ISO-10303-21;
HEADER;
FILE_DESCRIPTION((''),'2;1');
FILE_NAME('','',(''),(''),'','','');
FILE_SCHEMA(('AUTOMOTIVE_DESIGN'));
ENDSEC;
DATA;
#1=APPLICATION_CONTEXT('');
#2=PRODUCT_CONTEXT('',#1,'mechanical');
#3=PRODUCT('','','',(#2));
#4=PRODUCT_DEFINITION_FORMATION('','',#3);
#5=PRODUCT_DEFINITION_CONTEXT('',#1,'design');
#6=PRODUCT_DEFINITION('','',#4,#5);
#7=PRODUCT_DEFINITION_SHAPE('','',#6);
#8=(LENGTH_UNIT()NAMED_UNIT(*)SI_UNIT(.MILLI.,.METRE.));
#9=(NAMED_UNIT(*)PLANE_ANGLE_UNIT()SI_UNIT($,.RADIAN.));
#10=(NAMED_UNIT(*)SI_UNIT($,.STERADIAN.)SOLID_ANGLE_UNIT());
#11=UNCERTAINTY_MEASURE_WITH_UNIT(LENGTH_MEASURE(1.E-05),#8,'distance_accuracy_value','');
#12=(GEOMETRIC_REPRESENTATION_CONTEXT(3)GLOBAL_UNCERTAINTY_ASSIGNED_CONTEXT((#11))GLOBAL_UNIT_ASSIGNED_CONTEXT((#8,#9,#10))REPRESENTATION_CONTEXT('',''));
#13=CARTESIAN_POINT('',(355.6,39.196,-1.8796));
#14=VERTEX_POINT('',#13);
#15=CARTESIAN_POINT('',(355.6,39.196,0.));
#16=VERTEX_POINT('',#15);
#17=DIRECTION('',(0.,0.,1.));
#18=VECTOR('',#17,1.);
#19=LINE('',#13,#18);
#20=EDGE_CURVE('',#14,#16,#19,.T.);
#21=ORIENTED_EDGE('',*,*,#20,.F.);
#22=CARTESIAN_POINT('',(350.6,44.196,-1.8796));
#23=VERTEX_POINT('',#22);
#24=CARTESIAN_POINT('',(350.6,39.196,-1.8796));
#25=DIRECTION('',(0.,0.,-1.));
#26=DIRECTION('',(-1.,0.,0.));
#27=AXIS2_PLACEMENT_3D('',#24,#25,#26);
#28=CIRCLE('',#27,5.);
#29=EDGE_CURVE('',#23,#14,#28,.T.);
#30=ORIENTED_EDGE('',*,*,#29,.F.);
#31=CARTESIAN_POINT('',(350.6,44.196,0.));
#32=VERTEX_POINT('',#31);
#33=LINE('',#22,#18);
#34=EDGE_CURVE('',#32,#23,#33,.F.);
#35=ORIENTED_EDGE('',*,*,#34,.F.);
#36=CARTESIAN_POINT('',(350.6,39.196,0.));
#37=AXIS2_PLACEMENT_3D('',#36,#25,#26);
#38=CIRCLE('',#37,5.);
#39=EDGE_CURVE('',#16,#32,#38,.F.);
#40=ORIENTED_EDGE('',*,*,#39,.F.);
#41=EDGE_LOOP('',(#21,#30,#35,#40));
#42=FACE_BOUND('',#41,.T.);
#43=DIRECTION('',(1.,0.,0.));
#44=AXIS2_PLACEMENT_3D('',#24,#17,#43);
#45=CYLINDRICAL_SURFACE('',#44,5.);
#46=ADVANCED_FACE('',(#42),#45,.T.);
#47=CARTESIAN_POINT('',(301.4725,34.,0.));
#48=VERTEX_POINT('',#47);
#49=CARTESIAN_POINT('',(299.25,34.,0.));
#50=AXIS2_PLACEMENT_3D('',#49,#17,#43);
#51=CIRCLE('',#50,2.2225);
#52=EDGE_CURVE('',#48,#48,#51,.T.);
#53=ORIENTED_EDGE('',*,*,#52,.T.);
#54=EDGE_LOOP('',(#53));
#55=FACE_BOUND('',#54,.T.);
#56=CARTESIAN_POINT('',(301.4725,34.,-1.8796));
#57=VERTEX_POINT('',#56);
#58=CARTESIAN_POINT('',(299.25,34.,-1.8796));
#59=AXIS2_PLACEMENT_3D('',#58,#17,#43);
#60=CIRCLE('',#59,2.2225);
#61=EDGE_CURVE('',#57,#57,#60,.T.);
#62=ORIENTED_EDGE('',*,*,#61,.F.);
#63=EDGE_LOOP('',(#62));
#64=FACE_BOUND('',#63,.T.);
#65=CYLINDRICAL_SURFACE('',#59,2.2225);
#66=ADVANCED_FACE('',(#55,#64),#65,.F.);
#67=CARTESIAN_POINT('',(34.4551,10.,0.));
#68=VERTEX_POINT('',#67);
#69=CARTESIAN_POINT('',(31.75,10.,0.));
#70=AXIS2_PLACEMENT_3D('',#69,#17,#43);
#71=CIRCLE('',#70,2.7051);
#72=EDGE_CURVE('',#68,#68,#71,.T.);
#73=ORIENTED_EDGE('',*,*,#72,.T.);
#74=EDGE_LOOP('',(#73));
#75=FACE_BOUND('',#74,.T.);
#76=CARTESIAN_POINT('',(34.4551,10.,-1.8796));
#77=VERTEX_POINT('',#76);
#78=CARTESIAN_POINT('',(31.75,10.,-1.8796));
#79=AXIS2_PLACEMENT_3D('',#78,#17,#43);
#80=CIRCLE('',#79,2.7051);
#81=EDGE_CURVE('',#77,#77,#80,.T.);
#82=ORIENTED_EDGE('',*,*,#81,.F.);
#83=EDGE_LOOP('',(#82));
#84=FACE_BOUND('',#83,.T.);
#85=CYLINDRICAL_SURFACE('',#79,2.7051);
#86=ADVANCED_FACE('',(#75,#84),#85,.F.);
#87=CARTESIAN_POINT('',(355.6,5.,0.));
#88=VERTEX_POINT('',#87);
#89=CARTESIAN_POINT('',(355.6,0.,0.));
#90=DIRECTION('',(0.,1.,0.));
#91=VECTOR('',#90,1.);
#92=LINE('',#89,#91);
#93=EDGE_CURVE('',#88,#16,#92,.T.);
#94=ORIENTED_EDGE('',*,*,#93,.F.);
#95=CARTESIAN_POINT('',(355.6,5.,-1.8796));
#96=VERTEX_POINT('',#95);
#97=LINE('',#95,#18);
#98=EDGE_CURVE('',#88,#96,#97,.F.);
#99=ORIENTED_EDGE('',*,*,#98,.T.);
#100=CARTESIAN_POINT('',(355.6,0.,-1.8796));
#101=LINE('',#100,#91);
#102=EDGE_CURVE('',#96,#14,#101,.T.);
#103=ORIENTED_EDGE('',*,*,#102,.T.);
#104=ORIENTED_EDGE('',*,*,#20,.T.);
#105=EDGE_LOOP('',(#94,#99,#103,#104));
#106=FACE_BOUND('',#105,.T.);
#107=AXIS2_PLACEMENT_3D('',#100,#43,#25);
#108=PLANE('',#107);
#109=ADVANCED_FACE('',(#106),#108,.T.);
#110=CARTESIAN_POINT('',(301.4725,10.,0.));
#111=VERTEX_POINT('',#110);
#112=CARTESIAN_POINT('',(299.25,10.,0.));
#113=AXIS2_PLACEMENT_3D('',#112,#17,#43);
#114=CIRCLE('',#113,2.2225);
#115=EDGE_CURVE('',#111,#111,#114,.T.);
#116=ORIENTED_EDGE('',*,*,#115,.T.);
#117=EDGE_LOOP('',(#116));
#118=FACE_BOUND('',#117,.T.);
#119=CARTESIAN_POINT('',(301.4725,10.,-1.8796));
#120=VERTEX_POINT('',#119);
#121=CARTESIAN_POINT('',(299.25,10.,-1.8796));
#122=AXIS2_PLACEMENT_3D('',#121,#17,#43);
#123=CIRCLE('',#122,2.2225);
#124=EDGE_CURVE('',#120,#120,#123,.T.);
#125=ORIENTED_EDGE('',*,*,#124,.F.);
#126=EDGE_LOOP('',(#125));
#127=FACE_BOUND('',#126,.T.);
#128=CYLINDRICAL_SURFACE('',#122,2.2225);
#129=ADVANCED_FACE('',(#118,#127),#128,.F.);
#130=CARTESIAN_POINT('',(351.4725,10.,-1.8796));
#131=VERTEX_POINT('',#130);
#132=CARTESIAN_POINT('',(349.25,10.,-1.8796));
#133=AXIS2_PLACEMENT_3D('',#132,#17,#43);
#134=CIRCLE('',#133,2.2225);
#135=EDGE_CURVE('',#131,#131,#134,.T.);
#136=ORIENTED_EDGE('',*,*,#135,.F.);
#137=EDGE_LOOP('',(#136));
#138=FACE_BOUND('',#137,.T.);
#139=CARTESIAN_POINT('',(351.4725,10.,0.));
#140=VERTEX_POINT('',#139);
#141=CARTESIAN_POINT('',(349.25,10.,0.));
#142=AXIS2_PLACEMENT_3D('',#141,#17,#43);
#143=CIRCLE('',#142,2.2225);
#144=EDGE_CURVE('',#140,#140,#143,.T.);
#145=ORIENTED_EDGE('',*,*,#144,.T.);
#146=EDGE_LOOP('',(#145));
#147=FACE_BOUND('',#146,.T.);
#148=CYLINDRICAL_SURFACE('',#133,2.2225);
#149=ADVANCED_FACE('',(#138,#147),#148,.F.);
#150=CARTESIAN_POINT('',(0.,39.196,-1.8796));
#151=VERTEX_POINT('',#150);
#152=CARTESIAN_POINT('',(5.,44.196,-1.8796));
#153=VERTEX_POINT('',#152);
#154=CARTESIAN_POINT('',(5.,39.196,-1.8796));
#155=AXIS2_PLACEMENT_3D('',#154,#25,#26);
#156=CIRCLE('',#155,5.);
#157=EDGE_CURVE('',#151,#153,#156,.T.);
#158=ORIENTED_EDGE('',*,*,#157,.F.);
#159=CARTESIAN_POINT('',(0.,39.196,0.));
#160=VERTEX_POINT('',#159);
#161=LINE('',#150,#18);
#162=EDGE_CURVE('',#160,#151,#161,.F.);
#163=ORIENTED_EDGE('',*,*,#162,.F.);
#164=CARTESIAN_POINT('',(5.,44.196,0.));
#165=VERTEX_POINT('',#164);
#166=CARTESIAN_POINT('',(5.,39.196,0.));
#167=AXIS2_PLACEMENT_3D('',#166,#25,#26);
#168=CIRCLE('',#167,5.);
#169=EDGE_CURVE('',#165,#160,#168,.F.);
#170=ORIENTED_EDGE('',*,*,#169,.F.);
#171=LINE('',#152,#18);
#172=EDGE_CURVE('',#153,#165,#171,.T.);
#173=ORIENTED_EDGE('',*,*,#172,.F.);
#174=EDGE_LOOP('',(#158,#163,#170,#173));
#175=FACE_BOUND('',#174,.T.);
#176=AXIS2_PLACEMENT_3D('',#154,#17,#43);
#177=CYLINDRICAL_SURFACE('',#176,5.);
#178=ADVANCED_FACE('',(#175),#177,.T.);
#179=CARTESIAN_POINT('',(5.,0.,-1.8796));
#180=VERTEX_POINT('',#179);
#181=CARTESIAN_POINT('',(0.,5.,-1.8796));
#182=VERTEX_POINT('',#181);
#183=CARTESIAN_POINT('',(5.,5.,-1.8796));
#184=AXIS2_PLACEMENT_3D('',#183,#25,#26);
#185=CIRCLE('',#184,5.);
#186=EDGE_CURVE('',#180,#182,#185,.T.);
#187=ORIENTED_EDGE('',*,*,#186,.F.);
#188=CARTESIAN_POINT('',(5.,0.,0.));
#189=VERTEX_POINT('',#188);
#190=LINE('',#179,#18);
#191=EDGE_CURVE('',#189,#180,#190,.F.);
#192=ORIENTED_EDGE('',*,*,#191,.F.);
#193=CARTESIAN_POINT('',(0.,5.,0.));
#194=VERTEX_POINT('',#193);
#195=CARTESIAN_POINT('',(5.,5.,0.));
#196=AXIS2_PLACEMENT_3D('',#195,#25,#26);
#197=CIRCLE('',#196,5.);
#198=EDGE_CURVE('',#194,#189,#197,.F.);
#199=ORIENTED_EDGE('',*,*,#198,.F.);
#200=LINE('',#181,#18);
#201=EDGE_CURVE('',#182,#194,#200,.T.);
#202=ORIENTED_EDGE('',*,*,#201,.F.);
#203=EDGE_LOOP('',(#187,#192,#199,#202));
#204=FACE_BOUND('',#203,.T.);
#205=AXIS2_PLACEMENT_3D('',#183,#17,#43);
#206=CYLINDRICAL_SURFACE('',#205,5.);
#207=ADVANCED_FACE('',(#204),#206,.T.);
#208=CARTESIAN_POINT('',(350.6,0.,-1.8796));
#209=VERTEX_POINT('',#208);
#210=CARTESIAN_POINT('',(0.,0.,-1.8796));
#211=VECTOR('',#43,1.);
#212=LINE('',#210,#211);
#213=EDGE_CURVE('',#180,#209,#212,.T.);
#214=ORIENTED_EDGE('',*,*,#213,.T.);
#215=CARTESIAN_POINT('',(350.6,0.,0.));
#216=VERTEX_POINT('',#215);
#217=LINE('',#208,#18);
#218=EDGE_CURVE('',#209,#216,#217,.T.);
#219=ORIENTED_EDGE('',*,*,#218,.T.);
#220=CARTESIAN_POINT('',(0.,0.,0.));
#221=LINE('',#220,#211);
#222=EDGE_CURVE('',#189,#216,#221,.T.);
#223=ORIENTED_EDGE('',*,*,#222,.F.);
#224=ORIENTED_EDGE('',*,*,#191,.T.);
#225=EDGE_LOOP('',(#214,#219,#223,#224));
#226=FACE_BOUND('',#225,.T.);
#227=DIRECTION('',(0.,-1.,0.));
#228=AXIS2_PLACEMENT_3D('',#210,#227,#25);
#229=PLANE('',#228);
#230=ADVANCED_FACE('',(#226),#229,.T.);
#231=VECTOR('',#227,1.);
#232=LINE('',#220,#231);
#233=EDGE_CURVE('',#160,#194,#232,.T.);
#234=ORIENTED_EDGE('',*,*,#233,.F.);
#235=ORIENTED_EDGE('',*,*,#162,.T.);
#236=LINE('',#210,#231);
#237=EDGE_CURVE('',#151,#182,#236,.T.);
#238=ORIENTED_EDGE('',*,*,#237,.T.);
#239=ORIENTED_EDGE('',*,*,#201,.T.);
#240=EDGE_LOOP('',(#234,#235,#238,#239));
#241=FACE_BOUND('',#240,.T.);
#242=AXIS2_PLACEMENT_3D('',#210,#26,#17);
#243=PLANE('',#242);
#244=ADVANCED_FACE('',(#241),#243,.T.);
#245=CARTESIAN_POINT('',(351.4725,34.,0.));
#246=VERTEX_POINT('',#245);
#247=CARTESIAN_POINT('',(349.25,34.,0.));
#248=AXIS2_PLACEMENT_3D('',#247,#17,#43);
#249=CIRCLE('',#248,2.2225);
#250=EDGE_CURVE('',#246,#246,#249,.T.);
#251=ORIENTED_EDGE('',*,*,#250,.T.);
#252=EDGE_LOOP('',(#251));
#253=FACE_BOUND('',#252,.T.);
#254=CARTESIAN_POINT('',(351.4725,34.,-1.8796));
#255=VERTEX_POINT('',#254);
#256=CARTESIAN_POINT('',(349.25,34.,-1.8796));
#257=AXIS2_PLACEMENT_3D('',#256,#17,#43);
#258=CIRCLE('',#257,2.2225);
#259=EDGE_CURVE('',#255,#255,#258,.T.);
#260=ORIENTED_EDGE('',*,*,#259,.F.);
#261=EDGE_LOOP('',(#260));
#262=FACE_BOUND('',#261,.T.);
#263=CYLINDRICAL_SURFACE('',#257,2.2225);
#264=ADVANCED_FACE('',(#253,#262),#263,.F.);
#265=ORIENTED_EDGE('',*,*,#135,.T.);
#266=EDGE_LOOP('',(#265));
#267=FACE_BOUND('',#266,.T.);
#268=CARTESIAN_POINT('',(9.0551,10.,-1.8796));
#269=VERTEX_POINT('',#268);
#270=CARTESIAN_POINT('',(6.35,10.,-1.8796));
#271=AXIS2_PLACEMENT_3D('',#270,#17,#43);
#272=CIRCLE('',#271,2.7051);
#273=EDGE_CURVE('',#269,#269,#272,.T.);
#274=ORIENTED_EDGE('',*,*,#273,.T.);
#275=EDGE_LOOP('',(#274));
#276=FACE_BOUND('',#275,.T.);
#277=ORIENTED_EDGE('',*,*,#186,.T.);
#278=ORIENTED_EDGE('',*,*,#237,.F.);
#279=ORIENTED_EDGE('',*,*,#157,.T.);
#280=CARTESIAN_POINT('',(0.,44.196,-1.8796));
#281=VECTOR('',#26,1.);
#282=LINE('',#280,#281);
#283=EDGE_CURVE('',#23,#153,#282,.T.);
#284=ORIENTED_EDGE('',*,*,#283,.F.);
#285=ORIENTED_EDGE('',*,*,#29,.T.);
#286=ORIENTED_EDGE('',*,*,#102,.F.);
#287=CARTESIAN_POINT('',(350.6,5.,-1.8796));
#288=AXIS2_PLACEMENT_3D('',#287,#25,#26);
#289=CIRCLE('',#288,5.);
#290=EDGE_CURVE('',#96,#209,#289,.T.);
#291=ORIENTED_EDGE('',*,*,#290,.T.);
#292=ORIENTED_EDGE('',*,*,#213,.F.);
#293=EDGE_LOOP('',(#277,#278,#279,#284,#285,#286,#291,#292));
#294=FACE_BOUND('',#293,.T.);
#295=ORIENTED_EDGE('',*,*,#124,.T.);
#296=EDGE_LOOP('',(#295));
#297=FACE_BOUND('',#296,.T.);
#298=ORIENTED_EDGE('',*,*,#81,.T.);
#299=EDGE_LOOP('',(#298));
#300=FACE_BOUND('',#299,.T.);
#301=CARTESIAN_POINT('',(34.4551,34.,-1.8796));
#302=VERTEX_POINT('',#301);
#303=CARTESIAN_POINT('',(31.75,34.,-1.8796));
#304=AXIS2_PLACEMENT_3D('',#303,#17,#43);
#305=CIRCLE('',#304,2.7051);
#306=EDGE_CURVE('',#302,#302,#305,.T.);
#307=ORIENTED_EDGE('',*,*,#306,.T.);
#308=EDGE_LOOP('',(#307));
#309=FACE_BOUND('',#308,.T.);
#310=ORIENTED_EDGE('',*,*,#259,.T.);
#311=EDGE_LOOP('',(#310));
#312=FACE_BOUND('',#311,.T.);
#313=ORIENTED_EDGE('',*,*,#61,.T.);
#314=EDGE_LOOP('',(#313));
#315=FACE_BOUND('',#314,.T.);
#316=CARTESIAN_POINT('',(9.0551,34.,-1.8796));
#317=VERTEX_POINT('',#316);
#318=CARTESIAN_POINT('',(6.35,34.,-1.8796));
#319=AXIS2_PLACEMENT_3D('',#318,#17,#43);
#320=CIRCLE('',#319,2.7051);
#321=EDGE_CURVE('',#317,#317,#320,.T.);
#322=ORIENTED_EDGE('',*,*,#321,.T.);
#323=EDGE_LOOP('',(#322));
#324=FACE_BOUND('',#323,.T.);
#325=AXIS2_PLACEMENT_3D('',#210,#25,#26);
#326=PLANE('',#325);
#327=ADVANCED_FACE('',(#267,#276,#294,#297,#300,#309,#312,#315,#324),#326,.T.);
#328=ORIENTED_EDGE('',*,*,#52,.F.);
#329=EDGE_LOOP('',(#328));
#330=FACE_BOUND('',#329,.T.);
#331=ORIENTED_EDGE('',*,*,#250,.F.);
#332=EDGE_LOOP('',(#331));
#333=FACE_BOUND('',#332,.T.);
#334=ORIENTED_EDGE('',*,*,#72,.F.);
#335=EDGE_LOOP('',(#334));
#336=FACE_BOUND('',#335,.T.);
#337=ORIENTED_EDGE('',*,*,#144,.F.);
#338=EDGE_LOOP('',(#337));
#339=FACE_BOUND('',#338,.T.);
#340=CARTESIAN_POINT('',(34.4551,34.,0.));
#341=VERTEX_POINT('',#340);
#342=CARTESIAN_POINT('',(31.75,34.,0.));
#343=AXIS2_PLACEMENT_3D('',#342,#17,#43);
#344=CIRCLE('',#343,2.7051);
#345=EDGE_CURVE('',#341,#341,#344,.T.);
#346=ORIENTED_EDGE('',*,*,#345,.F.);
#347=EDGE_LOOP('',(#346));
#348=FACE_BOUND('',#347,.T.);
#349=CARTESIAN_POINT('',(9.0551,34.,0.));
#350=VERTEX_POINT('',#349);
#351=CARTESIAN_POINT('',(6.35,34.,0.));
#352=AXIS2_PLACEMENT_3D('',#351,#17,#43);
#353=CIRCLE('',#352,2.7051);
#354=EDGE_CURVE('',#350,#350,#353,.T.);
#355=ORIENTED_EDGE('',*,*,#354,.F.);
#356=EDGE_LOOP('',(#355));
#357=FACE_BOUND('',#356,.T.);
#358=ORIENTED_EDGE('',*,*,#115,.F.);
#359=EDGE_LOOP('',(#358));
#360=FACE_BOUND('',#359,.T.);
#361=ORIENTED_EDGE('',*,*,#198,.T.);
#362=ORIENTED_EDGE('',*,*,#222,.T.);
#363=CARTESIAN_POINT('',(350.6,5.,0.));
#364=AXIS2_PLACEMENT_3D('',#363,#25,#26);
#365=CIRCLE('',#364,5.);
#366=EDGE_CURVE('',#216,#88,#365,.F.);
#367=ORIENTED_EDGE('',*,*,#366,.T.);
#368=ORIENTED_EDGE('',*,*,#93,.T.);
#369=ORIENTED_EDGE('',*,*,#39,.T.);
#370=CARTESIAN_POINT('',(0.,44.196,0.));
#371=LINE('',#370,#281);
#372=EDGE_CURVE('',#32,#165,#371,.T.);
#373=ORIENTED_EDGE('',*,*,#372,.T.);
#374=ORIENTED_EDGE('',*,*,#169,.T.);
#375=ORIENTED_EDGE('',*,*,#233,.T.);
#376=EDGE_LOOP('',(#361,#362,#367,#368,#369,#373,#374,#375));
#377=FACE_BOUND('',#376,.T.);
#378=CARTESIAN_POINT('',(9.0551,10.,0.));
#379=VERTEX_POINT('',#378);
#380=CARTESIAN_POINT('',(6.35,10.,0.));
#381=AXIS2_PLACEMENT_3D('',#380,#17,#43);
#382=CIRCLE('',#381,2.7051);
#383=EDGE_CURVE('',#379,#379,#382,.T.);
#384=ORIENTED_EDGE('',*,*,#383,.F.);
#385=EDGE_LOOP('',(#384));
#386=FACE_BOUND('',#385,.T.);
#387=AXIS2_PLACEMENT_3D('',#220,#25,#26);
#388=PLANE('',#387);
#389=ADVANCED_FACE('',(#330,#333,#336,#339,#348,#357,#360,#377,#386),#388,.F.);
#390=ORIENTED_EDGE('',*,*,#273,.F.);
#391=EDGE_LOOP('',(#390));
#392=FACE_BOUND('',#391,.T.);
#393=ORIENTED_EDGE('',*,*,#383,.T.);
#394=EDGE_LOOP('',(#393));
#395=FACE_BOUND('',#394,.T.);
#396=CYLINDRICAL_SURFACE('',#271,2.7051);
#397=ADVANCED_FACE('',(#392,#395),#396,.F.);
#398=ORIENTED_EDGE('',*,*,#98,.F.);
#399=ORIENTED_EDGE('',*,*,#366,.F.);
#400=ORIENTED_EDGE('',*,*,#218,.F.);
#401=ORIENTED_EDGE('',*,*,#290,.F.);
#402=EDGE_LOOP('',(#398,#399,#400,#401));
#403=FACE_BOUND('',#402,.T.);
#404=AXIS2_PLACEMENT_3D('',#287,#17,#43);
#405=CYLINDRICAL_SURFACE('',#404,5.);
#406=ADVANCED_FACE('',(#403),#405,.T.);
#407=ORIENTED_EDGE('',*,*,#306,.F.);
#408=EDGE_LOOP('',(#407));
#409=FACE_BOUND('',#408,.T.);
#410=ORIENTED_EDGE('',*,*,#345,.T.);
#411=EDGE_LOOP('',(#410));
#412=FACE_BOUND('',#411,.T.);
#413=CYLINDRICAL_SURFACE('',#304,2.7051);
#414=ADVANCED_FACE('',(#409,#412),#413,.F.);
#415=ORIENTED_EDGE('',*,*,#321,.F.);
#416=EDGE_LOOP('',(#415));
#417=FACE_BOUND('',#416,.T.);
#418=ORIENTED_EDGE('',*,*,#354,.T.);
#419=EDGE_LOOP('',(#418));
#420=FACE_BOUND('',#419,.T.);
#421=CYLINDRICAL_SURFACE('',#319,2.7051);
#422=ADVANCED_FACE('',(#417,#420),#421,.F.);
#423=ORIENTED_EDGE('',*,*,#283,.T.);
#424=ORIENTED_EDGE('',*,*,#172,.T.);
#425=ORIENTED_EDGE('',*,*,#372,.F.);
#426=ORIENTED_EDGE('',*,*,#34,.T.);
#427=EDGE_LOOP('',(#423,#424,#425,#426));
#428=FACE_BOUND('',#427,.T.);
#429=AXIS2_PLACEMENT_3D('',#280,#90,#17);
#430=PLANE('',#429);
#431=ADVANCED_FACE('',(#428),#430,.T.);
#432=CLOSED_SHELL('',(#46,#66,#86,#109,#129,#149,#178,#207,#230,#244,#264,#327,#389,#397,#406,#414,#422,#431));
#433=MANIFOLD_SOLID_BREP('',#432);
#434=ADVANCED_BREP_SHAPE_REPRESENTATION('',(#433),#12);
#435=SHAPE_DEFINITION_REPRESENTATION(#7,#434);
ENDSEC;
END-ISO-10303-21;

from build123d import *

# Parameters (mm, degrees)
SKETCH1_W          = 355.6
SKETCH1_H          = 44.196
SKETCH1_R          = 2.2225
SKETCH1_R_2        = 2.7051
BASE_FLANGE1_DEPTH = 1.8796
FILLET1_R          = 5


# Sheet-metal steps are written as plain solids
with BuildPart() as part:
    # Sketch1 → Base-Flange1 (new body)
    with BuildSketch(Plane.XY):
        with Locations((177.8, 22.098)):
            Rectangle(SKETCH1_W, SKETCH1_H)
        with Locations((299.25, 10)):
            Circle(SKETCH1_R, mode=Mode.SUBTRACT)
        with Locations((349.25, 10)):
            Circle(SKETCH1_R, mode=Mode.SUBTRACT)
        with Locations((349.25, 34)):
            Circle(SKETCH1_R, mode=Mode.SUBTRACT)
        with Locations((299.25, 34)):
            Circle(SKETCH1_R, mode=Mode.SUBTRACT)
        with Locations((6.35, 34)):
            Circle(SKETCH1_R_2, mode=Mode.SUBTRACT)
        with Locations((31.75, 34)):
            Circle(SKETCH1_R_2, mode=Mode.SUBTRACT)
        with Locations((6.35, 10)):
            Circle(SKETCH1_R_2, mode=Mode.SUBTRACT)
        with Locations((31.75, 10)):
            Circle(SKETCH1_R_2, mode=Mode.SUBTRACT)
    extrude(amount=-BASE_FLANGE1_DEPTH)

    # Fillet1
    fillet1_edges = [part.edges().sort_by_distance(p)[0] for p in [
        (0, 44.196, -0.9398),
        (355.6, 44.196, -0.9398),
        (355.6, 0, -0.9398),
        (0, 0, -0.9398),
    ]]
    fillet(fillet1_edges, radius=FILLET1_R)


solid = part.part
